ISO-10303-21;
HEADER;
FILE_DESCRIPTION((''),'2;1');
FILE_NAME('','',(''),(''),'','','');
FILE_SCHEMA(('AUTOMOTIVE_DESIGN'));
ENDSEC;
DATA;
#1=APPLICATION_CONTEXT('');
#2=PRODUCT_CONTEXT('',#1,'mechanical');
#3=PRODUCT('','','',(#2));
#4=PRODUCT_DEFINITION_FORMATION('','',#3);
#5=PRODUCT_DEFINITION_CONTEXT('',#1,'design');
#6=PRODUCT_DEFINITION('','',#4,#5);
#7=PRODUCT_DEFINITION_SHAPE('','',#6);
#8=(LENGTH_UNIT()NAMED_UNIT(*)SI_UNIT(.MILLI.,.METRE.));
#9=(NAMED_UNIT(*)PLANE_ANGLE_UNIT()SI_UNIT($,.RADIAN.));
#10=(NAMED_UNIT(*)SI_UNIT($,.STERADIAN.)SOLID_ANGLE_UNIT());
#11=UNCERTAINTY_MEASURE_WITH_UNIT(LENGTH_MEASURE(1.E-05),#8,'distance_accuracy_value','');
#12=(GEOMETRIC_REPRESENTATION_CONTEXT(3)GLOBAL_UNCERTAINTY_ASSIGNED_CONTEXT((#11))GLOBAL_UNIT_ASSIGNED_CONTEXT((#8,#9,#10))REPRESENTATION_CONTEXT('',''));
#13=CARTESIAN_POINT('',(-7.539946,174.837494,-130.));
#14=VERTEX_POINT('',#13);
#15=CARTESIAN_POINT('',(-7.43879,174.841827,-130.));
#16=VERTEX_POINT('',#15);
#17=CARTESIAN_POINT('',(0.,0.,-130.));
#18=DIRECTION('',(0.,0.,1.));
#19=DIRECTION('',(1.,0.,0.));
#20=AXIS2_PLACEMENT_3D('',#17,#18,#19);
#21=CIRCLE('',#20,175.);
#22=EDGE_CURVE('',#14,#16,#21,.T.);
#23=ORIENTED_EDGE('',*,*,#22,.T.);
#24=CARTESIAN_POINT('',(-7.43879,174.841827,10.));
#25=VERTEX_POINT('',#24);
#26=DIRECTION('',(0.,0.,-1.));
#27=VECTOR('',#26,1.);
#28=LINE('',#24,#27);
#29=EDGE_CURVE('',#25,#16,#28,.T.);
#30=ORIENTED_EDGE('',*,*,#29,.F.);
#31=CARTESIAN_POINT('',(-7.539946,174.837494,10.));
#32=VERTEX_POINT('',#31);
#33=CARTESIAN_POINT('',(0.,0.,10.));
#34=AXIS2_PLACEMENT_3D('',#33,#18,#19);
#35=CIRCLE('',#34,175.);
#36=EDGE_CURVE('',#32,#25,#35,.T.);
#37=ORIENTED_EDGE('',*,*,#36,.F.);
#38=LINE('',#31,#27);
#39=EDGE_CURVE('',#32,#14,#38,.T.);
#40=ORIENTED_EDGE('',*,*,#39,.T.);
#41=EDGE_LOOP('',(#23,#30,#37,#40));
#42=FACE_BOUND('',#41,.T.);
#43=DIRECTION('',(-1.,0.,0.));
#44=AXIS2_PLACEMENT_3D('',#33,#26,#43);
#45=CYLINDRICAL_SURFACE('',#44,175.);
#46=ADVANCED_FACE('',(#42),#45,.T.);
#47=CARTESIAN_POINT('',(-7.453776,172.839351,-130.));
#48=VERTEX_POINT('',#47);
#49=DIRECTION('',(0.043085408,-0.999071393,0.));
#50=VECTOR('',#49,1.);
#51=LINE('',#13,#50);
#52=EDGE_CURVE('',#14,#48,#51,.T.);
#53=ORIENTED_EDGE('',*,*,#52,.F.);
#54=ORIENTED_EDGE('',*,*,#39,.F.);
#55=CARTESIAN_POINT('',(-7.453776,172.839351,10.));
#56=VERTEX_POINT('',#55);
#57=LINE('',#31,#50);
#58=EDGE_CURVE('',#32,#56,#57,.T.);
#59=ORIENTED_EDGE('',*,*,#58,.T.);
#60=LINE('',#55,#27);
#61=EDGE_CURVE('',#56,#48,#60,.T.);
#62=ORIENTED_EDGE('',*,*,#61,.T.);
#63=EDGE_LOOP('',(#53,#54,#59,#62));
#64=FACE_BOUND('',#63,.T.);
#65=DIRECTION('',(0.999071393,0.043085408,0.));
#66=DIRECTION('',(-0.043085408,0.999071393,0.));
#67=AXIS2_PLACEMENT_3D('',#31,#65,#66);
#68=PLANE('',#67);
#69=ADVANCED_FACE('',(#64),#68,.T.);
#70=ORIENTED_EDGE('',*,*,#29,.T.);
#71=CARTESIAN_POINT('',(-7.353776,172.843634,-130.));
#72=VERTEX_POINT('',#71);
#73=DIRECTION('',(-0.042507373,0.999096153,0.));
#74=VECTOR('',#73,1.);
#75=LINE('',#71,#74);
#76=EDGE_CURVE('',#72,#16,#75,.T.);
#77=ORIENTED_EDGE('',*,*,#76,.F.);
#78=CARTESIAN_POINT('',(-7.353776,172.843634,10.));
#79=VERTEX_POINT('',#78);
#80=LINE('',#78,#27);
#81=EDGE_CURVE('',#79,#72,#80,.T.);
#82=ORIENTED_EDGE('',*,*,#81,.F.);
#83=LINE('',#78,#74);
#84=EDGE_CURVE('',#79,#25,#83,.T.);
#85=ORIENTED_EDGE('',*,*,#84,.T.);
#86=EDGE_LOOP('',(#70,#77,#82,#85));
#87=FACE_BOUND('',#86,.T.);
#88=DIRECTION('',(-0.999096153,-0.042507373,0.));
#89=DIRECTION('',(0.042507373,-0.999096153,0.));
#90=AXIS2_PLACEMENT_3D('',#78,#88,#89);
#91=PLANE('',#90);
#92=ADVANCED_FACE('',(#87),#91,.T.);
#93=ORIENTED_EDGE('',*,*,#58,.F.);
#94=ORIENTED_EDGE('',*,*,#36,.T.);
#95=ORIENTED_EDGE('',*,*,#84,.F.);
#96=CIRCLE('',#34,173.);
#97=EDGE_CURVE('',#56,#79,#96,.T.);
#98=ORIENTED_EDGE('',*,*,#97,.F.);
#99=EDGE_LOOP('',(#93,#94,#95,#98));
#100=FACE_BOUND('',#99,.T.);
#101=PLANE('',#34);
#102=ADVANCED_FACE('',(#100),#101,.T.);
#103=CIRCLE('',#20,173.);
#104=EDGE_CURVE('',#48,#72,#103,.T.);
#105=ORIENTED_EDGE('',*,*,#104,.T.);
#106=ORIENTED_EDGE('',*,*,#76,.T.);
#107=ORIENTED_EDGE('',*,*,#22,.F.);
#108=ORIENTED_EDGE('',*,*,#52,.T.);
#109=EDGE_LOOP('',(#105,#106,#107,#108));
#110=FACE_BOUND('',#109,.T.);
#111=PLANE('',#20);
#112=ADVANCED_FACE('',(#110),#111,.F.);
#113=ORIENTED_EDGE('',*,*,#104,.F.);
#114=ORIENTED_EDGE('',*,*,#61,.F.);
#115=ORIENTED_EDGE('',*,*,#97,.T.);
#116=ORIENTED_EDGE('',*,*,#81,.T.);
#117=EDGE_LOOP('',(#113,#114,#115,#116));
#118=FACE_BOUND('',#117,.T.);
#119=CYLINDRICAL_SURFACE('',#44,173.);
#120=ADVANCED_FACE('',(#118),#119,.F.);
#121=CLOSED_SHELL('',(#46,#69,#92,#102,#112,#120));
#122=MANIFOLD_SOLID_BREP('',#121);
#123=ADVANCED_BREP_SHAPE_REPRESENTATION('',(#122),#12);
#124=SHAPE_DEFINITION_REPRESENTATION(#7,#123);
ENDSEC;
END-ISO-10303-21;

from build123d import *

# Parameters (mm, degrees)
BASE_FLANGE1_DEPTH      = 10
BASE_FLANGE1_DEPTH_BACK = 130


# Sheet-metal steps are written as plain solids
with BuildPart() as part:
    # Sketch1 → Base-Flange1 (new, two sides: drawn at the far end of the back side and taken through both)
    with BuildSketch(Plane.XY.offset(-BASE_FLANGE1_DEPTH_BACK)):
        with BuildLine():
            ThreePointArc((-7.453775566, 172.83935093), (7.403775876, -172.841499944), (-7.353775566, 172.843634493))
            Line((-7.353775566, 172.843634493), (-7.438790313, 174.8418268))
            ThreePointArc((-7.438790313, 174.8418268), (7.489368661, -174.839667573), (-7.539946382, 174.837493715))
            Line((-7.539946382, 174.837493715), (-7.453775566, 172.83935093))
        make_face()
    extrude(amount=BASE_FLANGE1_DEPTH + BASE_FLANGE1_DEPTH_BACK)


solid = part.part
